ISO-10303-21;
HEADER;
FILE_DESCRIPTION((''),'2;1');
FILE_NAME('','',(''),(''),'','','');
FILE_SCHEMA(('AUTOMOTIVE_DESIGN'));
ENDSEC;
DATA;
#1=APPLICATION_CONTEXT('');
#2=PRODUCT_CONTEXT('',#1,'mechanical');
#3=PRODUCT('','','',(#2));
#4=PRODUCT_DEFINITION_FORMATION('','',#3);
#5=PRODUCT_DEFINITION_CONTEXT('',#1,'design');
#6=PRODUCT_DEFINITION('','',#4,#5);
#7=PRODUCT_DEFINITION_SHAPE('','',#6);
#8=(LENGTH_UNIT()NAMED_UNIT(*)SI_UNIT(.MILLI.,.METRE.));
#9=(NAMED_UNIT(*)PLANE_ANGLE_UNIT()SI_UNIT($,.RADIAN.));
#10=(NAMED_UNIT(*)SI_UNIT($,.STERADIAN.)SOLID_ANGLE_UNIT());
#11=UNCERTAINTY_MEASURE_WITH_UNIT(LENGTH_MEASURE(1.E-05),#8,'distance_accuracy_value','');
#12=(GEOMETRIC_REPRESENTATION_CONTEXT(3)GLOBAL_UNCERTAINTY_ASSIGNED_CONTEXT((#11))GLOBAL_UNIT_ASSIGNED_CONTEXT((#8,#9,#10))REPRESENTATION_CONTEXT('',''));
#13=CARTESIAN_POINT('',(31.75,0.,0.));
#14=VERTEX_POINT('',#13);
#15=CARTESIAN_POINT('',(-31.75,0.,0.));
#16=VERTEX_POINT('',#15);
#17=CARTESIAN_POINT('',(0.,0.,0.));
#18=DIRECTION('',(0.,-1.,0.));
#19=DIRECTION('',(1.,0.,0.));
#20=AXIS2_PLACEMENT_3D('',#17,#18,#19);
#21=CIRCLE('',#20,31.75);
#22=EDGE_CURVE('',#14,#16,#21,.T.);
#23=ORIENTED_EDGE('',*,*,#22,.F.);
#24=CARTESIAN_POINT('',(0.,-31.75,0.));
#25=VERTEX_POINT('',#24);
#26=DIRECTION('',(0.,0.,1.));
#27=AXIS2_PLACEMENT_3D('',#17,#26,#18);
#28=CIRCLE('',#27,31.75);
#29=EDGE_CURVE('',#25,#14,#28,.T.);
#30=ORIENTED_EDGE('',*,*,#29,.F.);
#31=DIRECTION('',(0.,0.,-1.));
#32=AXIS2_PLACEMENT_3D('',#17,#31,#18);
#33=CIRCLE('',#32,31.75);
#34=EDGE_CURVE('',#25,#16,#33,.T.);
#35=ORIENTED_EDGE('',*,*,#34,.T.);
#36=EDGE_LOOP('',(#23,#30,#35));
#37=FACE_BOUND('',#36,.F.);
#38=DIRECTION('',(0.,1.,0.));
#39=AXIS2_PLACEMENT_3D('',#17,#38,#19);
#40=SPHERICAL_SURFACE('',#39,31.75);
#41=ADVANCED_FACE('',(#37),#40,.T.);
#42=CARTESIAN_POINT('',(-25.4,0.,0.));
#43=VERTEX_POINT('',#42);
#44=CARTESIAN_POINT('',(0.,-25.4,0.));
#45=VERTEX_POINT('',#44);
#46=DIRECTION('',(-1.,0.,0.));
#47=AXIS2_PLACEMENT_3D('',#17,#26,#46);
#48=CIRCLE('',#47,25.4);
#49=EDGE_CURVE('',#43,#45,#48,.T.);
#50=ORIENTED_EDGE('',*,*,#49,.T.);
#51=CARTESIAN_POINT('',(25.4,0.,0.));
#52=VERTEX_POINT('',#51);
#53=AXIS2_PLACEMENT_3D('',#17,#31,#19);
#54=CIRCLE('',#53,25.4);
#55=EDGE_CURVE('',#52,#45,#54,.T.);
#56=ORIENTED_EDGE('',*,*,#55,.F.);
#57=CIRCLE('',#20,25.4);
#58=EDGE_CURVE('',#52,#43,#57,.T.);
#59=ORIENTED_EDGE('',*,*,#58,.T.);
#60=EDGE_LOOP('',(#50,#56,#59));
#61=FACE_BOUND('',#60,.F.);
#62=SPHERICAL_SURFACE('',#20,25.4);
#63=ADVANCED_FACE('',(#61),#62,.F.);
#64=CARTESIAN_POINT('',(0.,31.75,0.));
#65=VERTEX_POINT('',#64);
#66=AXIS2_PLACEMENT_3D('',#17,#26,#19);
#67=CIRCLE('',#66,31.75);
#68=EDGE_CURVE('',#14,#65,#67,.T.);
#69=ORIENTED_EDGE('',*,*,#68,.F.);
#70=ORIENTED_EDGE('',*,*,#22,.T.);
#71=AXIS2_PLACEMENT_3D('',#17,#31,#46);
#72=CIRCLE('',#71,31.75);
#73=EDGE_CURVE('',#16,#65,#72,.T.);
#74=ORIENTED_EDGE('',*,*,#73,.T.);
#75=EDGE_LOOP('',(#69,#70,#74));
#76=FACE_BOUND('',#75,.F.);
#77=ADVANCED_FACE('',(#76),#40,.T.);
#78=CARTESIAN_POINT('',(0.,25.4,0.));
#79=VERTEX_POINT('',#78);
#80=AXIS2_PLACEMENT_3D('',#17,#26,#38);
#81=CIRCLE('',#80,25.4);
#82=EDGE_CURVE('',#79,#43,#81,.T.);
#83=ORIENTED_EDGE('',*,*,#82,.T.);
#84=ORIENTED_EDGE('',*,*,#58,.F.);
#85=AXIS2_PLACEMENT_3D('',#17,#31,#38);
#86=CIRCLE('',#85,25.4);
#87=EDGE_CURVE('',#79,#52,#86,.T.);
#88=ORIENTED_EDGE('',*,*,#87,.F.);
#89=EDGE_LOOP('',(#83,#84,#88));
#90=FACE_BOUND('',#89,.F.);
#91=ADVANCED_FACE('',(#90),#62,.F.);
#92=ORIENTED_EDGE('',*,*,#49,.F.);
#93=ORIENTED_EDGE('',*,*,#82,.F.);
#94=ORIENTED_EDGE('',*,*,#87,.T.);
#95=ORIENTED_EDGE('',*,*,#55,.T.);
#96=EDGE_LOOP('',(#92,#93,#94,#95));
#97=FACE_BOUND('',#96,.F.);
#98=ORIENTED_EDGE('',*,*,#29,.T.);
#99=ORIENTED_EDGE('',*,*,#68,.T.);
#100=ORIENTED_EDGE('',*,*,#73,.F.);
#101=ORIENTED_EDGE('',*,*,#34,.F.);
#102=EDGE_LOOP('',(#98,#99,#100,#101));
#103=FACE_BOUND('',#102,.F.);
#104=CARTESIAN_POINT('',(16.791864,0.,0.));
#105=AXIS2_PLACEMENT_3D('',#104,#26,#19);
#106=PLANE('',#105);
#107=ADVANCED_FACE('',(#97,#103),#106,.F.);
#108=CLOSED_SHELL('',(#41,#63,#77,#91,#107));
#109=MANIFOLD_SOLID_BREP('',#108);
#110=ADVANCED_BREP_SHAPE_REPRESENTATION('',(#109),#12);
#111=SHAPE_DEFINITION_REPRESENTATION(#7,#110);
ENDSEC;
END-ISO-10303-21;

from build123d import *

# Parameters (mm, degrees)
F1_ANGLE = 180


with BuildPart() as f1:
    # F0 (on Top) → F1 (revolve)
    with BuildSketch(Plane.XY):
        with BuildLine():
            ThreePointArc((0, -31.75), (22.4506403027, -22.4506403027), (31.75, 0))
            ThreePointArc((31.75, 0), (22.4506403027, 22.4506403027), (0, 31.75))
            Line((0, 31.75), (0, 25.4))
            ThreePointArc((0, 25.4), (17.9605122421, 17.9605122421), (25.4, 0))
            ThreePointArc((25.4, 0), (17.9605122421, -17.9605122421), (0, -25.4))
            Line((0, -25.4), (0, -31.75))
        make_face()
    revolve(axis=Axis((0, 0, 0), (0, -1, 0)), revolution_arc=F1_ANGLE)


solid = f1.part
